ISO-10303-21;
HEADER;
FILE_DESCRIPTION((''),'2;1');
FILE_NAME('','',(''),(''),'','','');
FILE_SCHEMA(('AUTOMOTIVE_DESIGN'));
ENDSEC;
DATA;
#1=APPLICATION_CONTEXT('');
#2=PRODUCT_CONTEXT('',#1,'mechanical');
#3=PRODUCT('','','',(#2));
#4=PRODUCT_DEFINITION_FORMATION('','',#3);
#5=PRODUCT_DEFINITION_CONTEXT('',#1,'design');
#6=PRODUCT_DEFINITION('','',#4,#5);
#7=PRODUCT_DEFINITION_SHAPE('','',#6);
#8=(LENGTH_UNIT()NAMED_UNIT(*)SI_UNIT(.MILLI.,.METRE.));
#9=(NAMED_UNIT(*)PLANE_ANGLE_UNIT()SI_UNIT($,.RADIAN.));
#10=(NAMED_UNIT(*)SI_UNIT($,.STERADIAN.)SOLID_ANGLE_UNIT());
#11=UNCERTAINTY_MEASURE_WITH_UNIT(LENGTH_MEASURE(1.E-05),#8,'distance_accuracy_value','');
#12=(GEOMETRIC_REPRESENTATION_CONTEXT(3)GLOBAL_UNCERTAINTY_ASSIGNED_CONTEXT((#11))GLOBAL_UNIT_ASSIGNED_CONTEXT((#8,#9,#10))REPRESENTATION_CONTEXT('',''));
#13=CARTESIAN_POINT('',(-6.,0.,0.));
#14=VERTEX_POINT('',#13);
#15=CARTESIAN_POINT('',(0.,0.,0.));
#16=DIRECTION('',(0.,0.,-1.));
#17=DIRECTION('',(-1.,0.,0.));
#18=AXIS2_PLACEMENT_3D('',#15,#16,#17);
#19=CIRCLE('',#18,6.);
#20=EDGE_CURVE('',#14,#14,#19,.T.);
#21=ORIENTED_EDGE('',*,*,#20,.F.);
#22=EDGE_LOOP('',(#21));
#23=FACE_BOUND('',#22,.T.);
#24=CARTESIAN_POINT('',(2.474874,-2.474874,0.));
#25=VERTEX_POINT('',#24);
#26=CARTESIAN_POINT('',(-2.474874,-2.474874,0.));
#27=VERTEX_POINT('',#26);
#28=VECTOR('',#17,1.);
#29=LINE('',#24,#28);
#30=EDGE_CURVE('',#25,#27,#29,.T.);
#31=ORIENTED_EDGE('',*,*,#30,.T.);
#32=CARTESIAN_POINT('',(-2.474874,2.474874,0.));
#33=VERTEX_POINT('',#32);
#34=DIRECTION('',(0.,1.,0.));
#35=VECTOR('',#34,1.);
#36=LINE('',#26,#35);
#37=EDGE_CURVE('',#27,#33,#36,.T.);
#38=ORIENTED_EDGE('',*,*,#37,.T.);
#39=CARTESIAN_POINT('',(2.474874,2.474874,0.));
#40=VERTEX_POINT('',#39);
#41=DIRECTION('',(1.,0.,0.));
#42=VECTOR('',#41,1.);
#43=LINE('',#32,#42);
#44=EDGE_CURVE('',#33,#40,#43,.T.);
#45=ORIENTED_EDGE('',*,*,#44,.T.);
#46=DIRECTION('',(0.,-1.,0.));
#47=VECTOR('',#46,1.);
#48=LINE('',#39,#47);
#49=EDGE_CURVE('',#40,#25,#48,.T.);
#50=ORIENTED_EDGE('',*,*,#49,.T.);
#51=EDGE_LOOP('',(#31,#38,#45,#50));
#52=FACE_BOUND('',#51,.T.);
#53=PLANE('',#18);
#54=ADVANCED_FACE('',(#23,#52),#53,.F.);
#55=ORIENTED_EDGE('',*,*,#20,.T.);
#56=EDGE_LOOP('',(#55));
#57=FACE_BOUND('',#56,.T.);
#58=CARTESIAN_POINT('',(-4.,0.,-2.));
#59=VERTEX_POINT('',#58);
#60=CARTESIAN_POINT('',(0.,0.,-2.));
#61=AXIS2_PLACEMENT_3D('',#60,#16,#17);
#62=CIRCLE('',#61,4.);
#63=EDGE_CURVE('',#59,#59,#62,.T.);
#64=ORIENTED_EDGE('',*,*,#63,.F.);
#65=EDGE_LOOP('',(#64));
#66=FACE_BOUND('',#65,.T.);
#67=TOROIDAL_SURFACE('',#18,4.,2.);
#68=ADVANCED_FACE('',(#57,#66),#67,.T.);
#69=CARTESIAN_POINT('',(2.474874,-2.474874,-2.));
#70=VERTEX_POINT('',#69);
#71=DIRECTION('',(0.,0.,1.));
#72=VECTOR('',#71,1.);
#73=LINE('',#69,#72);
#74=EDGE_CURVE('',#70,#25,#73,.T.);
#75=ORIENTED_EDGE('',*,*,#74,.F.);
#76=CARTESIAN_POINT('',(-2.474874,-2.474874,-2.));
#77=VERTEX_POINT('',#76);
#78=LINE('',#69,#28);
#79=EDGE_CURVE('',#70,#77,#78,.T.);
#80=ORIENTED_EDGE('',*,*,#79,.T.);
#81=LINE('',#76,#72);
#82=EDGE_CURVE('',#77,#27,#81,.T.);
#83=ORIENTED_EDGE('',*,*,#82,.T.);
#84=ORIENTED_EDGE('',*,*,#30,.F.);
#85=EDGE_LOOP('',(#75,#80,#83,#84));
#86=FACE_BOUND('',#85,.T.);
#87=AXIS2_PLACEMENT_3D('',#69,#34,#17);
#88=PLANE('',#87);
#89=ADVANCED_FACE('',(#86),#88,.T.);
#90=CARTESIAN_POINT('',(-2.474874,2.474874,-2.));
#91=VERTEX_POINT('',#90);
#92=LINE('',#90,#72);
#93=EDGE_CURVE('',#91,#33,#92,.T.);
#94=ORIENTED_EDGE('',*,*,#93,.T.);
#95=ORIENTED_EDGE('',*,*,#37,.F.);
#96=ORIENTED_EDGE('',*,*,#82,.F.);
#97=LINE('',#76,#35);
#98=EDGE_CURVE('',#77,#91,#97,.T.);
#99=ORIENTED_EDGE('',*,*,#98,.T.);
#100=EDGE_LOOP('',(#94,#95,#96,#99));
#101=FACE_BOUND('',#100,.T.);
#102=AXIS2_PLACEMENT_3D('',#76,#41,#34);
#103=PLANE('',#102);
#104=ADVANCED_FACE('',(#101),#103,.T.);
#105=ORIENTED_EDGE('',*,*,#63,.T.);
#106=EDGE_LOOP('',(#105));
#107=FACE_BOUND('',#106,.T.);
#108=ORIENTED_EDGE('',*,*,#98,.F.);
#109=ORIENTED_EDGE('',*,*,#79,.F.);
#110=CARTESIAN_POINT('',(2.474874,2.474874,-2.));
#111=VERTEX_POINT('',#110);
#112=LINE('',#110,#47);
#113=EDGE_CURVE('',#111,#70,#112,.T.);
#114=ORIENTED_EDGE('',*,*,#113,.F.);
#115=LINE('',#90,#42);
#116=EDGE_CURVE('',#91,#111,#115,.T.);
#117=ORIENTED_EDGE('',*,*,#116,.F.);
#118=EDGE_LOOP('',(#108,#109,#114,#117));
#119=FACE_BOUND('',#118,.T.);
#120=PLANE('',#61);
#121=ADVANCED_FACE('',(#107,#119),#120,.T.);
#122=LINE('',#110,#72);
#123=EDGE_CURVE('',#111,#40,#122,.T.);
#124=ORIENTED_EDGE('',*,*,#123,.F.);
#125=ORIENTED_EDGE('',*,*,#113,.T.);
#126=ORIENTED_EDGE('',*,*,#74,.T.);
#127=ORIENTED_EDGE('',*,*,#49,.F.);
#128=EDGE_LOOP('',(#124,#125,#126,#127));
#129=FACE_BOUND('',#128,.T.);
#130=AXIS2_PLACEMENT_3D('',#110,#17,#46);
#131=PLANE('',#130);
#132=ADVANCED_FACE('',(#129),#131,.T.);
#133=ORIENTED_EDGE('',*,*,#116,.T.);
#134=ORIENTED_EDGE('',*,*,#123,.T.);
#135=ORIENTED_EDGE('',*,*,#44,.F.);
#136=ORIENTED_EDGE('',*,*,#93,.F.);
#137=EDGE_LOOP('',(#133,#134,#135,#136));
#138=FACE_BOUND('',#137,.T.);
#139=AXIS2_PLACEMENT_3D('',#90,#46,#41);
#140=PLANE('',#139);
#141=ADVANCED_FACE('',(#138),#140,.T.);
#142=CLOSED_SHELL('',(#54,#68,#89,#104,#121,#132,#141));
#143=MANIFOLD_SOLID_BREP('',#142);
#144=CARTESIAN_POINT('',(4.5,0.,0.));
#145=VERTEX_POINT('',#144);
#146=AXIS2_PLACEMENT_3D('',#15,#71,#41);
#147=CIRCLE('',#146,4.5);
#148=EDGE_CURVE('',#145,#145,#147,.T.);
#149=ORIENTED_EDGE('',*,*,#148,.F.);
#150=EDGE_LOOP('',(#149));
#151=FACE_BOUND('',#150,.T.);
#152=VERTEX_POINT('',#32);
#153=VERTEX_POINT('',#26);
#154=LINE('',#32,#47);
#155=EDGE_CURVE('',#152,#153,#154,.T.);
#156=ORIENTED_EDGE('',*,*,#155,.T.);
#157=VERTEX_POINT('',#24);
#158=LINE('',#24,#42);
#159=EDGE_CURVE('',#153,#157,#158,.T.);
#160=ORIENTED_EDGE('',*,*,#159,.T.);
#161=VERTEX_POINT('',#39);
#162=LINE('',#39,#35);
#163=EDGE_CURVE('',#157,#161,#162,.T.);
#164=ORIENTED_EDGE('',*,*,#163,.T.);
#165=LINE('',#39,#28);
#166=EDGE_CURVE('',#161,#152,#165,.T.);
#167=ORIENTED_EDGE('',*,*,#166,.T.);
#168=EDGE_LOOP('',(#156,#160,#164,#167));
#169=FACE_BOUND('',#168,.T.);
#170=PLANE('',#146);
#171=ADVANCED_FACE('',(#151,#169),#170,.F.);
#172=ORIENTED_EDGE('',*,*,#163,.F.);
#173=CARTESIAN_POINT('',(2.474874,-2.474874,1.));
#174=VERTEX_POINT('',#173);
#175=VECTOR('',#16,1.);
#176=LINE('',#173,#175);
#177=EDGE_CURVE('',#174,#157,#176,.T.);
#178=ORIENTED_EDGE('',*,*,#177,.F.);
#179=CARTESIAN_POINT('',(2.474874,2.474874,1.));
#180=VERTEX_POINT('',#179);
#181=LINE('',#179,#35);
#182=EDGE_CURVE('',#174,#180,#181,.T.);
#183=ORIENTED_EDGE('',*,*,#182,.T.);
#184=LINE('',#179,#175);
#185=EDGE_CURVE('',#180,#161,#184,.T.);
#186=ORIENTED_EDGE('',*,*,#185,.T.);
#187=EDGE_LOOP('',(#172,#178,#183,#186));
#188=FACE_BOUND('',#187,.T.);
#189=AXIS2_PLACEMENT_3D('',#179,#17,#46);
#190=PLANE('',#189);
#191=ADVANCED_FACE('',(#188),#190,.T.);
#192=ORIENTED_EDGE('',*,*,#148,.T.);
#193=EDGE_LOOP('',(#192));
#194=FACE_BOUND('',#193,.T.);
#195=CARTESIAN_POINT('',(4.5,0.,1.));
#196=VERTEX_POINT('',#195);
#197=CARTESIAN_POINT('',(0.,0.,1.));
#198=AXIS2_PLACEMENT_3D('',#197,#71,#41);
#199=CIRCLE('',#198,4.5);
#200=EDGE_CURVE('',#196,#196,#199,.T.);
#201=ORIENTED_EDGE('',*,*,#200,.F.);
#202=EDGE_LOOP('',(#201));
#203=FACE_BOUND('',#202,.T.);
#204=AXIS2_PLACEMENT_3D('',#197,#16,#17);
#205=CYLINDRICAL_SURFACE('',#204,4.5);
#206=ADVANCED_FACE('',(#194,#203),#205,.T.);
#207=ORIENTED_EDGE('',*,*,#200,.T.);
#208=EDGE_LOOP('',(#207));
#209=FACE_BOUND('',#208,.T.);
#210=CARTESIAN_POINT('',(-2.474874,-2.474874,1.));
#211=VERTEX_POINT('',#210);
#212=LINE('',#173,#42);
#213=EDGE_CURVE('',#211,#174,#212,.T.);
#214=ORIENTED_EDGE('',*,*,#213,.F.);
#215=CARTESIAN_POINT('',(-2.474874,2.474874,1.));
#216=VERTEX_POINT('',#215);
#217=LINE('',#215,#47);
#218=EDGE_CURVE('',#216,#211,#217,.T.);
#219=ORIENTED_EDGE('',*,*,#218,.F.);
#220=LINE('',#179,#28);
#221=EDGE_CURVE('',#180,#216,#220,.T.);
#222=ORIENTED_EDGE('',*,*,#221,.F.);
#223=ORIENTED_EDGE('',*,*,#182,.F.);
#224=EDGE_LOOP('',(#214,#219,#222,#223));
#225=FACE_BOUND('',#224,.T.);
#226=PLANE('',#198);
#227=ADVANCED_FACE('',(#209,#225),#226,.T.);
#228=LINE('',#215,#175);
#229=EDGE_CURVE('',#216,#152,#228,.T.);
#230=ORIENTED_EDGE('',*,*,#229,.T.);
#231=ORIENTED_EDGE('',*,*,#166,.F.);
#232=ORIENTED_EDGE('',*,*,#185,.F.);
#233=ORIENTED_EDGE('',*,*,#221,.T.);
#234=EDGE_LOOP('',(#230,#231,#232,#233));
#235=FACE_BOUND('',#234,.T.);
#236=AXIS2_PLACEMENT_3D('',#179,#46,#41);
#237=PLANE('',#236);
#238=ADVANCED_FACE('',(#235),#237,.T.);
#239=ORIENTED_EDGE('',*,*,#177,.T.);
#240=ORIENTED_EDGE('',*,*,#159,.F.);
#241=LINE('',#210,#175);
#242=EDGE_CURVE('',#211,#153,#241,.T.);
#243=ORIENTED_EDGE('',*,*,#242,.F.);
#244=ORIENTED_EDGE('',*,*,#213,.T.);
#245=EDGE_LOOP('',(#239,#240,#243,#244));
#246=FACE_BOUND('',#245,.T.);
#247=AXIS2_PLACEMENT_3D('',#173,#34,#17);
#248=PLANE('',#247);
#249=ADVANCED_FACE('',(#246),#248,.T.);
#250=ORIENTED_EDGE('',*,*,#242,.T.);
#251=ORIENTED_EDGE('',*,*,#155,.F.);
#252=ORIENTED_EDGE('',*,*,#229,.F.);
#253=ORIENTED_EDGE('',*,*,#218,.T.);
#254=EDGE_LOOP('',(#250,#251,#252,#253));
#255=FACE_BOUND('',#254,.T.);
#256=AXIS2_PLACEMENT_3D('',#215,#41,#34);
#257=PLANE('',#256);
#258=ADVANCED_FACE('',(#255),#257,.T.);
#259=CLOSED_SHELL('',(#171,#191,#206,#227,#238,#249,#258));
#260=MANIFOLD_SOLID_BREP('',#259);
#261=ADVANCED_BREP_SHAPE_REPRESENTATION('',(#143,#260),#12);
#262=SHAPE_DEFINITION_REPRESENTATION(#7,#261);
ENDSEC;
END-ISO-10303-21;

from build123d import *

# Parameters (mm, degrees)
SKETCH1_R           = 4.5
SKETCH1_W           = 4.949747468
SKETCH1_H           = 4.949747468
BOSS_EXTRUDE1_DEPTH = 1
SKETCH2_R           = 6
SKETCH2_W           = 4.949747468
SKETCH2_H           = 4.949747468
BOSS_EXTRUDE2_DEPTH = 2
FILLET1_R           = 2


with BuildPart() as part:
    # Sketch1 → Boss-Extrude1 (new body)
    with BuildSketch(Plane.XY):
        Circle(SKETCH1_R)
        Rectangle(SKETCH1_W, SKETCH1_H, mode=Mode.SUBTRACT)
    extrude(amount=BOSS_EXTRUDE1_DEPTH)


with BuildPart() as body_2:
    # Sketch2 → Boss-Extrude2 (new body)
    with BuildSketch(Plane(origin=(0, 0, 0), x_dir=(-1, 0, 0), z_dir=(0, 0, -1))):
        Circle(SKETCH2_R)
        Rectangle(SKETCH2_W, SKETCH2_H, mode=Mode.SUBTRACT)
    extrude(amount=BOSS_EXTRUDE2_DEPTH)

    # Fillet1
    fillet1_edges = [body_2.edges().sort_by_distance(p)[0] for p in [
        (6, 0, -2),
    ]]
    fillet(fillet1_edges, radius=FILLET1_R - 0.0001)  # a hair under: the kernel refuses the full size


solid = Compound([part.part, body_2.part])
